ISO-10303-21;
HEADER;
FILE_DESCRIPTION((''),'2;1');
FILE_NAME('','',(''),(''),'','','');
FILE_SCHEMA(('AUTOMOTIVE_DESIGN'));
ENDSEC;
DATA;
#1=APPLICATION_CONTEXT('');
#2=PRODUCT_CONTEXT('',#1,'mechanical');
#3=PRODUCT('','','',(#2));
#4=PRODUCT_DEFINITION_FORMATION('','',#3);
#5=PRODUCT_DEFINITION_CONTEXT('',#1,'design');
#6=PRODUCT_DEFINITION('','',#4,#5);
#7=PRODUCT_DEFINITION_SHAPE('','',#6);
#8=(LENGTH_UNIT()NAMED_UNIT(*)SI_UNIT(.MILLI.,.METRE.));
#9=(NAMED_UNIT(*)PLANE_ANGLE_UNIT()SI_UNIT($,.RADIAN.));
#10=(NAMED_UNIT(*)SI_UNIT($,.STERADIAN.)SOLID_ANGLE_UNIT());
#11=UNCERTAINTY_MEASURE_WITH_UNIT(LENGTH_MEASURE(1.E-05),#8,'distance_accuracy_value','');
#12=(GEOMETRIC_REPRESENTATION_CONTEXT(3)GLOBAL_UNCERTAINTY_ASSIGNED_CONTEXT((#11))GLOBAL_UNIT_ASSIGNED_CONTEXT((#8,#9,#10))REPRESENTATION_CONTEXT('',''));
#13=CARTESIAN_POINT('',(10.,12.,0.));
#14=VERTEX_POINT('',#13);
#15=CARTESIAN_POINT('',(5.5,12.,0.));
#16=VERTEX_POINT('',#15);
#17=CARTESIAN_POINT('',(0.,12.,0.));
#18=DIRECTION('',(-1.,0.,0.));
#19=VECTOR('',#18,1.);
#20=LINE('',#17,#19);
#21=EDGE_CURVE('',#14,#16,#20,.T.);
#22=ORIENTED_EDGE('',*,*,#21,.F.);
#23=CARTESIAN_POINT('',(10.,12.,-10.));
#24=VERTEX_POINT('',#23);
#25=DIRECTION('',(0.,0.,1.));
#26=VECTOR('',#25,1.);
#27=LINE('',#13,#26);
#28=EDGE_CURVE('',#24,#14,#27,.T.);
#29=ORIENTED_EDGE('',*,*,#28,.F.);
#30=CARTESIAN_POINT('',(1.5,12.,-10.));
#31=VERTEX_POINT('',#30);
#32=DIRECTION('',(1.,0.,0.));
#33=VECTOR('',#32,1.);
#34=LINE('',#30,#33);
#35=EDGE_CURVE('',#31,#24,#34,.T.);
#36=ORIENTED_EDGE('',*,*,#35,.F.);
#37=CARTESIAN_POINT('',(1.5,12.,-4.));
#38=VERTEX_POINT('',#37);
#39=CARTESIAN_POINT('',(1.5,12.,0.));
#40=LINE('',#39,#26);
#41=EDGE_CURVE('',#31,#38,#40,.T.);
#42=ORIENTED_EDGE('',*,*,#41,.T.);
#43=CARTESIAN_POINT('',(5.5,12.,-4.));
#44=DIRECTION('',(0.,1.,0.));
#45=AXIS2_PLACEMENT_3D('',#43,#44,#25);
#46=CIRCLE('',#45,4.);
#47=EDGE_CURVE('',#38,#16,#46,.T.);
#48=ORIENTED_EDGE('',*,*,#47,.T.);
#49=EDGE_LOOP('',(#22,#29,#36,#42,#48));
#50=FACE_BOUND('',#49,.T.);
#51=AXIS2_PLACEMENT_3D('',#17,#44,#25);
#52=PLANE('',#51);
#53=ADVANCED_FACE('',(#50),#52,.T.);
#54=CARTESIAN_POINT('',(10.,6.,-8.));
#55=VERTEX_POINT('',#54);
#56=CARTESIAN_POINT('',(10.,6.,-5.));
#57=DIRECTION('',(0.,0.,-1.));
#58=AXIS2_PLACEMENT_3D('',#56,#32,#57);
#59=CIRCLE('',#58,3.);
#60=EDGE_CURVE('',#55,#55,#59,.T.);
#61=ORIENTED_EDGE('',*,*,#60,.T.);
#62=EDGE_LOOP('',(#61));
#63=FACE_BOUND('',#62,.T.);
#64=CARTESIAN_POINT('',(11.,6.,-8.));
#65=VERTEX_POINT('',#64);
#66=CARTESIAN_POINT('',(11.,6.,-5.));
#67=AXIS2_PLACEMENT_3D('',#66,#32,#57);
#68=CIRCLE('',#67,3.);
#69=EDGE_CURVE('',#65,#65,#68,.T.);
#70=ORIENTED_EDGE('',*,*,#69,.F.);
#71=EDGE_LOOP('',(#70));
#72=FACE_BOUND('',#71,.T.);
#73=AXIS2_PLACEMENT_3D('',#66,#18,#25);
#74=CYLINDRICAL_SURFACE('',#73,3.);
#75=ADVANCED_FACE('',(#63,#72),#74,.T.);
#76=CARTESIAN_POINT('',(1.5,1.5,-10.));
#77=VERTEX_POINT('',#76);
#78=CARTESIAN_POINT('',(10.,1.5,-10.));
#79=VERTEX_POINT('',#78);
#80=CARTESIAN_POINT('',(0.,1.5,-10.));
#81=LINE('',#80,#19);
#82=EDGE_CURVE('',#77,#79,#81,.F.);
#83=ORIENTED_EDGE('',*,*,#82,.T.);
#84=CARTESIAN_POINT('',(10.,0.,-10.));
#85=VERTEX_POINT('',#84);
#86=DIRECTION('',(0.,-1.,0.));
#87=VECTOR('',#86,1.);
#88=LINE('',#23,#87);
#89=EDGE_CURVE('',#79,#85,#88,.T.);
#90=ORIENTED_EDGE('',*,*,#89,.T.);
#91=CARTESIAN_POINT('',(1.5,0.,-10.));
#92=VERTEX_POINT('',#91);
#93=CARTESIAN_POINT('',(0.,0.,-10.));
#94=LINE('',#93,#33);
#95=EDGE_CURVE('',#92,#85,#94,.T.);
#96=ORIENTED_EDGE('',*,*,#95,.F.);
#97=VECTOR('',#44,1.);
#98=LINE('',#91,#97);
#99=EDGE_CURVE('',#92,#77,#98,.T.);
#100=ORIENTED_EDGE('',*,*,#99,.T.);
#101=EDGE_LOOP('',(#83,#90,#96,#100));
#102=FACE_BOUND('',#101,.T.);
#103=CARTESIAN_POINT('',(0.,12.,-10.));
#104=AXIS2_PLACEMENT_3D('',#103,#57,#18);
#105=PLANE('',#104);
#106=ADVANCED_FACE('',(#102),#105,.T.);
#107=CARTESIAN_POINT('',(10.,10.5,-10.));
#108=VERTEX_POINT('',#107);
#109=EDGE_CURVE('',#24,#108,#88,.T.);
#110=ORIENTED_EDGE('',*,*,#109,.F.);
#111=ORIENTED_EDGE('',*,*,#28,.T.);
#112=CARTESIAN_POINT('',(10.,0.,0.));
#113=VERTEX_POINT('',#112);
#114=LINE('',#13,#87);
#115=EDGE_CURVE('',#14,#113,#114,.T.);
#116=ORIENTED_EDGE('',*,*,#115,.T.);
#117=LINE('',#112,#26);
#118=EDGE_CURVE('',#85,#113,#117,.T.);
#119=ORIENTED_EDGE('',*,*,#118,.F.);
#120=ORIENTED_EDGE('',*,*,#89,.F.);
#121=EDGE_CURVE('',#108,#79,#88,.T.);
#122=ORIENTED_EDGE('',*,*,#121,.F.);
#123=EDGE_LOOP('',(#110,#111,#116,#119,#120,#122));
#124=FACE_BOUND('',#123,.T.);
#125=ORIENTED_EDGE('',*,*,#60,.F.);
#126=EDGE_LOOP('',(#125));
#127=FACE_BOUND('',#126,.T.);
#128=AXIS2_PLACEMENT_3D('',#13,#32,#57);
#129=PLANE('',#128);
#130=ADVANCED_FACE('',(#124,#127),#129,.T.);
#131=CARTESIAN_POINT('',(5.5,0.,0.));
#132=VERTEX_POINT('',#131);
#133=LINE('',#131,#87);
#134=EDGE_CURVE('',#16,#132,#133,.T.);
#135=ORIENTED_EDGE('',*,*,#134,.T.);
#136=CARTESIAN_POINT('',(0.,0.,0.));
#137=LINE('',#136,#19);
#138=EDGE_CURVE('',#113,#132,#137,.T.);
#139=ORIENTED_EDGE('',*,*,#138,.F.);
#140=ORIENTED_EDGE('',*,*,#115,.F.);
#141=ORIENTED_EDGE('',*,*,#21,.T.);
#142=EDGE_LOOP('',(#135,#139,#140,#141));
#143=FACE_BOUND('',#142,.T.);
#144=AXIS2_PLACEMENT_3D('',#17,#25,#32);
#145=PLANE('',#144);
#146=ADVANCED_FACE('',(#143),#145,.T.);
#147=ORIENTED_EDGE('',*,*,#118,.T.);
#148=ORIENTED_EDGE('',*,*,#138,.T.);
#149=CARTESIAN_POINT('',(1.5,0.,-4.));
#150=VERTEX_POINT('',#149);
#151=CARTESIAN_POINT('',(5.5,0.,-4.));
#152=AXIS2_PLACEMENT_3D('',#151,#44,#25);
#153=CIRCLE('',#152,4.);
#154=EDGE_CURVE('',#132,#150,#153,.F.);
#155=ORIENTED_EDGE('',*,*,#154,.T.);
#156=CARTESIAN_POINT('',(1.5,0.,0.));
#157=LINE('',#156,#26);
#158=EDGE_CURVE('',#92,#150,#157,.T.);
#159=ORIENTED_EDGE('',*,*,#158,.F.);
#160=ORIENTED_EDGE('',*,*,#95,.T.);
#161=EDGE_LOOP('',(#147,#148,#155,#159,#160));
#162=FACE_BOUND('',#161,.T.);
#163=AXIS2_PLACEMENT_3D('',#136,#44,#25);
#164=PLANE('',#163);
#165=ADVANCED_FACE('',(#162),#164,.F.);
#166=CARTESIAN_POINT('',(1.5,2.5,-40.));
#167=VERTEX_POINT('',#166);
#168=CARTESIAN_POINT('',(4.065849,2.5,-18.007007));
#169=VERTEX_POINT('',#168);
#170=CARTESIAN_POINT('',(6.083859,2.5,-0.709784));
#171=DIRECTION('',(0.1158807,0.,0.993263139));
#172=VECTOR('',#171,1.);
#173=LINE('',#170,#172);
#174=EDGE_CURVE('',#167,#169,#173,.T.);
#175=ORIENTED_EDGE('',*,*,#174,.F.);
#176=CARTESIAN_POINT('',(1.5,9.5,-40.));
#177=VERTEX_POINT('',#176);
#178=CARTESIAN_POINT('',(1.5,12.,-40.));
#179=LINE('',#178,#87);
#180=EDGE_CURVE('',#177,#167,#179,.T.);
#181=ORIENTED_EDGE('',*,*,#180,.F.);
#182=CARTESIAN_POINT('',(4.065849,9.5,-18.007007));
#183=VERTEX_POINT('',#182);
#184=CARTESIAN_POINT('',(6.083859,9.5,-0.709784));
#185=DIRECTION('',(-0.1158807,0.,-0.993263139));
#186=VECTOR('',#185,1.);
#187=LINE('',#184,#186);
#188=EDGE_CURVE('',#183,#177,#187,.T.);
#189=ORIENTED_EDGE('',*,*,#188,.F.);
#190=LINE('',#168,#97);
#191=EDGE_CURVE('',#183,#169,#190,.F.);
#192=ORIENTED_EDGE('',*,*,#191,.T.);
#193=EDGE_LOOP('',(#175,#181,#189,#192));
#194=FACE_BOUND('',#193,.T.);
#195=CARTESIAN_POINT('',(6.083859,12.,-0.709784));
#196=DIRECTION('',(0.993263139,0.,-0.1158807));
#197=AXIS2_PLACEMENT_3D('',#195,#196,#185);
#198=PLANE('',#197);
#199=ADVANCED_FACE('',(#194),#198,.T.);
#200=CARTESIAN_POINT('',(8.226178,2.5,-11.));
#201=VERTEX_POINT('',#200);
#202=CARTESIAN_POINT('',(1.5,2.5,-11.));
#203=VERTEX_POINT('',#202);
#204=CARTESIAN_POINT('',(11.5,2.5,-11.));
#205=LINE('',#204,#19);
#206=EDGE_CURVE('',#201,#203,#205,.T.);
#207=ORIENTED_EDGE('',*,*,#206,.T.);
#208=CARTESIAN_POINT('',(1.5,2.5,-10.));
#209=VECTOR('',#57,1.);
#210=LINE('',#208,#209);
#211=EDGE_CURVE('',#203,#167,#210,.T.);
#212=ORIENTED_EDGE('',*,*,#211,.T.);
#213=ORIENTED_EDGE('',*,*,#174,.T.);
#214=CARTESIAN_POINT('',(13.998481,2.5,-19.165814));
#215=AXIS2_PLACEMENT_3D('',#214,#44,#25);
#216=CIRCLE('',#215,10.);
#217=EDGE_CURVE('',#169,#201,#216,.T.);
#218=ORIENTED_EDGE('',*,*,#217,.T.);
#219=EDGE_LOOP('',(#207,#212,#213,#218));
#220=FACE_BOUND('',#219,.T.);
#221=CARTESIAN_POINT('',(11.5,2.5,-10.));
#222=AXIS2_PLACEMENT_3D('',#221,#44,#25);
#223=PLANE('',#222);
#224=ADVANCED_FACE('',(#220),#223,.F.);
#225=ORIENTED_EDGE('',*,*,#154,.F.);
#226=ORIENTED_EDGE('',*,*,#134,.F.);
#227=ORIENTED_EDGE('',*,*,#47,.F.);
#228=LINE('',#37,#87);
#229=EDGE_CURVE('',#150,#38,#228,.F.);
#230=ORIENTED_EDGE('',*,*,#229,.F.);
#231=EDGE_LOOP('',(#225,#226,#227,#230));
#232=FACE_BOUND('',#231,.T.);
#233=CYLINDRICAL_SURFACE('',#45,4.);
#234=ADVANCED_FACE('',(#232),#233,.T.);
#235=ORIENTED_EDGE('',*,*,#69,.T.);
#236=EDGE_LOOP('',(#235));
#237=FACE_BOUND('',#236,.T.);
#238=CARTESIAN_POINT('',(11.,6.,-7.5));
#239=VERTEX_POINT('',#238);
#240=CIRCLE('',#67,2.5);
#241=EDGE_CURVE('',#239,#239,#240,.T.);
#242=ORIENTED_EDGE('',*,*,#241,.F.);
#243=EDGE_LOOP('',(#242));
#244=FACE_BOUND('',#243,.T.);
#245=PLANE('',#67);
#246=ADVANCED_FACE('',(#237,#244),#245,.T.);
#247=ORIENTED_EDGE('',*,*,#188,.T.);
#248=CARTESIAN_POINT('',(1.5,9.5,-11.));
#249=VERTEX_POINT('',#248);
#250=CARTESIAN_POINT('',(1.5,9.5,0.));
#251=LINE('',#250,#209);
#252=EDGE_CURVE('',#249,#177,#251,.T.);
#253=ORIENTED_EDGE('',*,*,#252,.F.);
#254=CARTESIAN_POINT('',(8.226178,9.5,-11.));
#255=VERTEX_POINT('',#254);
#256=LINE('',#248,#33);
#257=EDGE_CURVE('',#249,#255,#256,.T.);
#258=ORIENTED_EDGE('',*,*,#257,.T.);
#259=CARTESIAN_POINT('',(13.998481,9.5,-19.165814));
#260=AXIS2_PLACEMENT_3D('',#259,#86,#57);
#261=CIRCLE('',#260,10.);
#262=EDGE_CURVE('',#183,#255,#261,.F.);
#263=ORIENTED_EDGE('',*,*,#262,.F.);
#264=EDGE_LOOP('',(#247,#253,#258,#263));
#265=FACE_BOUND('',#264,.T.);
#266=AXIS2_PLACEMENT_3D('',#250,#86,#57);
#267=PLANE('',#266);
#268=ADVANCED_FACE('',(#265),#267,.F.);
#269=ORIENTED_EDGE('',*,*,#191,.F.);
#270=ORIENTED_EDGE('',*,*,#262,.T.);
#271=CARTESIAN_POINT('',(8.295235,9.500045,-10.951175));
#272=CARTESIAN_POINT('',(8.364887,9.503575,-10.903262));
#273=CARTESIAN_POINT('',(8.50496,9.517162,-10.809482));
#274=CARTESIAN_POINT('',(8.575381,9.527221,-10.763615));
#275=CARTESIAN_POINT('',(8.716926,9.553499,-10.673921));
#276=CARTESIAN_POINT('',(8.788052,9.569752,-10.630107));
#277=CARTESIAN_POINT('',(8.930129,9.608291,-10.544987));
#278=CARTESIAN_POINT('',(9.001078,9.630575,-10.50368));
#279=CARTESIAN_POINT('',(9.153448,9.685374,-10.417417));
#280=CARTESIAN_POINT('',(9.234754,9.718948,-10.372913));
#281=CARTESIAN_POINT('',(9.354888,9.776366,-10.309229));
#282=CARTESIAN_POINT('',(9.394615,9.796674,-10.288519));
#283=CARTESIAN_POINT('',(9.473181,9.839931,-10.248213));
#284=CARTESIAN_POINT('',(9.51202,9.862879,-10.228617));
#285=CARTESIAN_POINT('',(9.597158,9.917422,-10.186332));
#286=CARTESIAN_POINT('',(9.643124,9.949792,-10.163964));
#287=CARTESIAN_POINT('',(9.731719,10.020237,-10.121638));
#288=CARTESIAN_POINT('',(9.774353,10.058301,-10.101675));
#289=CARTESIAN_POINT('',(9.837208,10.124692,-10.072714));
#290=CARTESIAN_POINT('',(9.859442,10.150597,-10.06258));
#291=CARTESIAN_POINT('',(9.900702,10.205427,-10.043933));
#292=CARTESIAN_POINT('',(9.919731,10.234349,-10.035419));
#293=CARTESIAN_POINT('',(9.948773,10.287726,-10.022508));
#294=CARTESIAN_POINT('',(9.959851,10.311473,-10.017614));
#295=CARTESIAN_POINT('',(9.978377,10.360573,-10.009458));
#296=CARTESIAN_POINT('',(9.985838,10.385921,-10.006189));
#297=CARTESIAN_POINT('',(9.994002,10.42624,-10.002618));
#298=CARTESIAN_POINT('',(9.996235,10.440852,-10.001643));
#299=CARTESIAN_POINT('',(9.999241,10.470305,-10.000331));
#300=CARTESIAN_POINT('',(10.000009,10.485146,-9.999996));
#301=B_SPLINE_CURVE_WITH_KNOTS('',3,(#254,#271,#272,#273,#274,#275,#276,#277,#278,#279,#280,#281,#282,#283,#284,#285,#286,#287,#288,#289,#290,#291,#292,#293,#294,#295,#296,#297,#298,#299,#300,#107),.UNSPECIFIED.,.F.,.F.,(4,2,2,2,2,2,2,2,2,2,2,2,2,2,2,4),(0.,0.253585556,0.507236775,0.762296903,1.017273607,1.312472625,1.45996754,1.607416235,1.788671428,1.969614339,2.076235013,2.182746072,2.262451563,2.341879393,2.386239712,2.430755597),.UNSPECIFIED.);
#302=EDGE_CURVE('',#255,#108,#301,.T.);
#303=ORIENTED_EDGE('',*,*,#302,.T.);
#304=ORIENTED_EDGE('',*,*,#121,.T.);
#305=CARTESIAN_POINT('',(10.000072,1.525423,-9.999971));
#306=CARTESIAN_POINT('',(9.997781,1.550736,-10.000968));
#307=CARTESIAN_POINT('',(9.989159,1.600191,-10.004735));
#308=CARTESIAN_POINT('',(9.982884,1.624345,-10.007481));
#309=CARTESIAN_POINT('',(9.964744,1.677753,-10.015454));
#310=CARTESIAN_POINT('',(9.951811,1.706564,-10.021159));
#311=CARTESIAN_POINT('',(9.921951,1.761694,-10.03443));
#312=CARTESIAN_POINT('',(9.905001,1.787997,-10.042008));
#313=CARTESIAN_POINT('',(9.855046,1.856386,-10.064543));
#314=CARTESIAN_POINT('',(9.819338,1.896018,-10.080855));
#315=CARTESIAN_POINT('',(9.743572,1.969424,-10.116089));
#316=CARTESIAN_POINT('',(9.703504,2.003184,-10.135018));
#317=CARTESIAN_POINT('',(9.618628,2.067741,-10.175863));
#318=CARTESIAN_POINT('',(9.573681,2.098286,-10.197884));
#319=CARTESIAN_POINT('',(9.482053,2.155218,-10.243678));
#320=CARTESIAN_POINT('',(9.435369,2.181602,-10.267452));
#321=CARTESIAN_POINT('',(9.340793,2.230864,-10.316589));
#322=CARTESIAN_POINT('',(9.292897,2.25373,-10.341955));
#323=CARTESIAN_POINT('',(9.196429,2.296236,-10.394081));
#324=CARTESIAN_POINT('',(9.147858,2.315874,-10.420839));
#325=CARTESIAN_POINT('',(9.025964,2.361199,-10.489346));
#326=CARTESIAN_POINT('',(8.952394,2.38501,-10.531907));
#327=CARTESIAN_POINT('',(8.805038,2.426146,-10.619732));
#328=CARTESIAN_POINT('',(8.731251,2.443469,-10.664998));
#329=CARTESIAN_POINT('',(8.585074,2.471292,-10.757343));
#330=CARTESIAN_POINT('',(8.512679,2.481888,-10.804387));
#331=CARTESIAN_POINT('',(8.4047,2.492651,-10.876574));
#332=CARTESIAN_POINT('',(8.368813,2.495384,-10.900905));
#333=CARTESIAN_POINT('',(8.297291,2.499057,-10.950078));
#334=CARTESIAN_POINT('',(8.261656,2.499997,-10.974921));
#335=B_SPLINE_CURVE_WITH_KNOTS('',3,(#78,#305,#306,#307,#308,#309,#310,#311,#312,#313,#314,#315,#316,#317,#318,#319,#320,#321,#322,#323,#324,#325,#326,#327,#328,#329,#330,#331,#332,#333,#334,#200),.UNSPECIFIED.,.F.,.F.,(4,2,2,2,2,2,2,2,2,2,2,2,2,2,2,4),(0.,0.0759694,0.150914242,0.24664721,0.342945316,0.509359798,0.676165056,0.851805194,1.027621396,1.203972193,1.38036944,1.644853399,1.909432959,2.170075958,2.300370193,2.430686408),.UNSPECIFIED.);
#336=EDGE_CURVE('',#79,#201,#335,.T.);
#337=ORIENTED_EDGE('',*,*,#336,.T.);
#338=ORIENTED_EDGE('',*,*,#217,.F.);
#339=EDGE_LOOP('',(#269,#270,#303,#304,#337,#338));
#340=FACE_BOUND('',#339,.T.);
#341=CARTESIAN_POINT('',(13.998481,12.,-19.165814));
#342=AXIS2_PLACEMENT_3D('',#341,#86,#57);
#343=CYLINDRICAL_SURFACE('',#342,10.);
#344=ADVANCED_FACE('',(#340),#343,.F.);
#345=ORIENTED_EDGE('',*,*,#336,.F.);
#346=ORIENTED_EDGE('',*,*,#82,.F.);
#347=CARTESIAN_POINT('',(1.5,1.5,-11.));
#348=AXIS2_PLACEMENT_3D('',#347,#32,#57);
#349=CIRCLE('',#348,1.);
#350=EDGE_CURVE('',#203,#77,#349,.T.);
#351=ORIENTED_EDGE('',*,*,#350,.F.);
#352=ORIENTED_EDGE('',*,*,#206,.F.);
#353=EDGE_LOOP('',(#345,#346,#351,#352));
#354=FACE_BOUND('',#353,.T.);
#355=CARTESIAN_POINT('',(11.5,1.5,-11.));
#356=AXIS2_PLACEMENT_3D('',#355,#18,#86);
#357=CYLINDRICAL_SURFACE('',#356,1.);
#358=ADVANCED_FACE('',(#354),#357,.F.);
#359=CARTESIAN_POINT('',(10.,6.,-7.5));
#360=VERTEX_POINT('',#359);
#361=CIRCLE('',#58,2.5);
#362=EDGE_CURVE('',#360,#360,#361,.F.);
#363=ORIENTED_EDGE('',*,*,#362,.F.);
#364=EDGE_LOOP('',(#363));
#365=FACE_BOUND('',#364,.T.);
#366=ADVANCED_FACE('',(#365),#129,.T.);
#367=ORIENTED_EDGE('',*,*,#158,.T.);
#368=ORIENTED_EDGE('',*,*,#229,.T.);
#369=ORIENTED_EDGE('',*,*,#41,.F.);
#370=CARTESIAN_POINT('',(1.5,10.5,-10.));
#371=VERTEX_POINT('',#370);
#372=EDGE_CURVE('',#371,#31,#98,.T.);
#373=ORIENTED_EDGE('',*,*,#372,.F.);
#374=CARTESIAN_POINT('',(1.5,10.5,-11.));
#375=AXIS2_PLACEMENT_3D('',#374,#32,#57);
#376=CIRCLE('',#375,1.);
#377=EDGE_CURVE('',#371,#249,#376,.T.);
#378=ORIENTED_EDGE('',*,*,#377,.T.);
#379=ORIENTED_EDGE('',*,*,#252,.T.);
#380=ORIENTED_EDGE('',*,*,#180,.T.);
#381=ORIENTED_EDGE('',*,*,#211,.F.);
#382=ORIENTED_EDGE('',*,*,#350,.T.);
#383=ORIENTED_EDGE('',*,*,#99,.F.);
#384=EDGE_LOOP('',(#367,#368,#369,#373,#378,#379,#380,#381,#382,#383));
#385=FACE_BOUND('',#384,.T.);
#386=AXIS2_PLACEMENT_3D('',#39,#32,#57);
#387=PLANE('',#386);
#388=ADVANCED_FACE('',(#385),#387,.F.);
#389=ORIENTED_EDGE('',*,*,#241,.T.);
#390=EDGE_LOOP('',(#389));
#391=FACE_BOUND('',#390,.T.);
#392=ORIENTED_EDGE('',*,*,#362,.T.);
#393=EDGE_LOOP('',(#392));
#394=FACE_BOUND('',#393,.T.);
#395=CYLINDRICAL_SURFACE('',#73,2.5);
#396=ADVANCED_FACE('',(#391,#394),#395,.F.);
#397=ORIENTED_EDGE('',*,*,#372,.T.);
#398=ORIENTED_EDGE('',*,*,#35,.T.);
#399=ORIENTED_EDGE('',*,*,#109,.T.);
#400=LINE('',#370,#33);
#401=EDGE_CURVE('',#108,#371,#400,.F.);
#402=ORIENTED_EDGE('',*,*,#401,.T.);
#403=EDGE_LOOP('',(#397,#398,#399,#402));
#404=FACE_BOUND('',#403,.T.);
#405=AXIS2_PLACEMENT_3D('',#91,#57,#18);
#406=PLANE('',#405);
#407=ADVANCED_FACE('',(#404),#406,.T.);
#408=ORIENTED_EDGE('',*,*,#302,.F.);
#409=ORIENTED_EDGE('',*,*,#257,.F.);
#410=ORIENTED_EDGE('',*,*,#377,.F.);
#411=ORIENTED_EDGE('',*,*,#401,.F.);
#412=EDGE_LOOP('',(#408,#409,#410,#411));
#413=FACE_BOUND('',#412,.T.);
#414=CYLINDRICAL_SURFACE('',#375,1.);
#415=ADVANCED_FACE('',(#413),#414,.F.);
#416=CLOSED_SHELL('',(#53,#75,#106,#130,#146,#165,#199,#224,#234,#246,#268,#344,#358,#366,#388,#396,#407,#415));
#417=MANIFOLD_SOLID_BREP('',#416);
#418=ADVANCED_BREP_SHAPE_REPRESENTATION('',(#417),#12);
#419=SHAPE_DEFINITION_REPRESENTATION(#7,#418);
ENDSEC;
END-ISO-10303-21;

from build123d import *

# Parameters (mm, degrees)
BOSS_EXTRUDE1_DEPTH = 12
SKETCH2_W           = 30
SKETCH2_H           = 2.5
CUT_EXTRUDE1_DEPTH  = 10
FILLET1_R           = 10
FILLET2_R           = 4
SKETCH5_W           = 57.951370105
SKETCH5_H           = 2.5
CUT_EXTRUDE2_DEPTH  = 43.617484675
FILLET3_R           = 1
FILLET4_R           = 1
SKETCH6_R           = 3
SKETCH6_R_2         = 2.5
BOSS_EXTRUDE2_DEPTH = 1


with BuildPart() as part:
    # Sketch1 → Boss-Extrude1 (new body)
    with BuildSketch(Plane(origin=(0, 0, 0), x_dir=(1, 0, 0), z_dir=(0, 1, 0))):
        Polygon((10, 0), (1.5, 0), (1.5, 40), (5, 10), (10, 10), align=None)
    extrude(amount=BOSS_EXTRUDE1_DEPTH)

    # Sketch2 → Cut-Extrude1 (cut)
    with BuildSketch(Plane.ZY.offset(-1.5)):
        with Locations((-25, 1.25)):
            Rectangle(SKETCH2_W, SKETCH2_H)
    extrude(amount=-CUT_EXTRUDE1_DEPTH, mode=Mode.SUBTRACT)

    # Fillet1
    # the kernel refuses this fillet: 10 mm, written as the material it adds along each edge
    with BuildSketch(Plane(origin=(5, 2.5, -10), x_dir=(1, 0, 0), z_dir=(0, 1, 0))) as fillet1_piece_1:
        with BuildLine():
            CenterArc((8.998480528, 9.165814392), FILLET1_R, 186.654425046, 59.776895084)
            Line((-0.934150863, 8.007007396), (-1.132803491, 7.983831256))
            Line((-1.132803491, 7.983831256), (-0.198652628, -0.02317614))
            Line((-0.198652628, -0.02317614), (0, -0.2))
            ThreePointArc((0, -0.2), (2.5, -0.2), (4.920030389, -0.183316288))
            Line((4.920030389, -0.183316288), (5, 0))
        make_face()
    extrude(amount=9.5)

    # Fillet2
    fillet2_edges = [part.edges().sort_by_distance(p)[0] for p in [
        (1.5, 6, 0),
    ]]
    fillet(fillet2_edges, radius=FILLET2_R)

    # Sketch5 → Cut-Extrude2 (cut, through all)
    with BuildSketch(Plane(origin=(10, 0, 0), x_dir=(0, 0, -1), z_dir=(1, 0, 0))):
        with Locations((38.975685053, 10.75)):
            Rectangle(SKETCH5_W, SKETCH5_H)
    extrude(amount=-CUT_EXTRUDE2_DEPTH, mode=Mode.SUBTRACT)

    # Fillet3
    # the kernel refuses this fillet: 1 mm, written as the material it adds along each edge
    with BuildSketch(Plane(origin=(10, 9.5, -10), x_dir=(0, 1, 0), z_dir=(-1, 0, 0))) as fillet3_piece_1_section:
        with BuildLine():
            CenterArc((FILLET3_R, FILLET3_R), FILLET3_R, 180, 90)
            Line((0, FILLET3_R), (0, 0))
            Line((0, 0), (FILLET3_R, 0))
        make_face()
    fillet3_piece_1 = extrude(amount=8.5, mode=Mode.PRIVATE)
    fillet3_piece_1 = fillet3_piece_1 - Plane(origin=(13.998480528, 9.732981391, -19.165814392), x_dir=(1, 0, 0), z_dir=(0, -1, 0)) * Cylinder(10, 22, mode=Mode.PRIVATE)
    add(fillet3_piece_1)

    # Fillet4
    # the kernel refuses this fillet: 1 mm, written as the material it adds along each edge
    with BuildSketch(Plane(origin=(10, 2.5, -10), x_dir=(0, 0, -1), z_dir=(-1, 0, 0))) as fillet4_piece_1_section:
        with BuildLine():
            CenterArc((FILLET4_R, FILLET4_R), FILLET4_R, 180, 90)
            Line((0, FILLET4_R), (0, 0))
            Line((0, 0), (FILLET4_R, 0))
        make_face()
    fillet4_piece_1 = extrude(amount=8.5, mode=Mode.PRIVATE)
    fillet4_piece_1 = fillet4_piece_1 - Plane(origin=(13.998480528, 2.267019068, -19.165814392), x_dir=(1, 0, 0), z_dir=(0, -1, 0)) * Cylinder(10, 21, mode=Mode.PRIVATE)
    add(fillet4_piece_1)

    # Sketch6 → Boss-Extrude2 (add)
    with BuildSketch(Plane(origin=(10, 0, 0), x_dir=(0, 0, -1), z_dir=(1, 0, 0))):
        with Locations((5, 6)):
            Circle(SKETCH6_R)
        with Locations((5, 6)):
            Circle(SKETCH6_R_2, mode=Mode.SUBTRACT)
    extrude(amount=BOSS_EXTRUDE2_DEPTH)


solid = part.part
